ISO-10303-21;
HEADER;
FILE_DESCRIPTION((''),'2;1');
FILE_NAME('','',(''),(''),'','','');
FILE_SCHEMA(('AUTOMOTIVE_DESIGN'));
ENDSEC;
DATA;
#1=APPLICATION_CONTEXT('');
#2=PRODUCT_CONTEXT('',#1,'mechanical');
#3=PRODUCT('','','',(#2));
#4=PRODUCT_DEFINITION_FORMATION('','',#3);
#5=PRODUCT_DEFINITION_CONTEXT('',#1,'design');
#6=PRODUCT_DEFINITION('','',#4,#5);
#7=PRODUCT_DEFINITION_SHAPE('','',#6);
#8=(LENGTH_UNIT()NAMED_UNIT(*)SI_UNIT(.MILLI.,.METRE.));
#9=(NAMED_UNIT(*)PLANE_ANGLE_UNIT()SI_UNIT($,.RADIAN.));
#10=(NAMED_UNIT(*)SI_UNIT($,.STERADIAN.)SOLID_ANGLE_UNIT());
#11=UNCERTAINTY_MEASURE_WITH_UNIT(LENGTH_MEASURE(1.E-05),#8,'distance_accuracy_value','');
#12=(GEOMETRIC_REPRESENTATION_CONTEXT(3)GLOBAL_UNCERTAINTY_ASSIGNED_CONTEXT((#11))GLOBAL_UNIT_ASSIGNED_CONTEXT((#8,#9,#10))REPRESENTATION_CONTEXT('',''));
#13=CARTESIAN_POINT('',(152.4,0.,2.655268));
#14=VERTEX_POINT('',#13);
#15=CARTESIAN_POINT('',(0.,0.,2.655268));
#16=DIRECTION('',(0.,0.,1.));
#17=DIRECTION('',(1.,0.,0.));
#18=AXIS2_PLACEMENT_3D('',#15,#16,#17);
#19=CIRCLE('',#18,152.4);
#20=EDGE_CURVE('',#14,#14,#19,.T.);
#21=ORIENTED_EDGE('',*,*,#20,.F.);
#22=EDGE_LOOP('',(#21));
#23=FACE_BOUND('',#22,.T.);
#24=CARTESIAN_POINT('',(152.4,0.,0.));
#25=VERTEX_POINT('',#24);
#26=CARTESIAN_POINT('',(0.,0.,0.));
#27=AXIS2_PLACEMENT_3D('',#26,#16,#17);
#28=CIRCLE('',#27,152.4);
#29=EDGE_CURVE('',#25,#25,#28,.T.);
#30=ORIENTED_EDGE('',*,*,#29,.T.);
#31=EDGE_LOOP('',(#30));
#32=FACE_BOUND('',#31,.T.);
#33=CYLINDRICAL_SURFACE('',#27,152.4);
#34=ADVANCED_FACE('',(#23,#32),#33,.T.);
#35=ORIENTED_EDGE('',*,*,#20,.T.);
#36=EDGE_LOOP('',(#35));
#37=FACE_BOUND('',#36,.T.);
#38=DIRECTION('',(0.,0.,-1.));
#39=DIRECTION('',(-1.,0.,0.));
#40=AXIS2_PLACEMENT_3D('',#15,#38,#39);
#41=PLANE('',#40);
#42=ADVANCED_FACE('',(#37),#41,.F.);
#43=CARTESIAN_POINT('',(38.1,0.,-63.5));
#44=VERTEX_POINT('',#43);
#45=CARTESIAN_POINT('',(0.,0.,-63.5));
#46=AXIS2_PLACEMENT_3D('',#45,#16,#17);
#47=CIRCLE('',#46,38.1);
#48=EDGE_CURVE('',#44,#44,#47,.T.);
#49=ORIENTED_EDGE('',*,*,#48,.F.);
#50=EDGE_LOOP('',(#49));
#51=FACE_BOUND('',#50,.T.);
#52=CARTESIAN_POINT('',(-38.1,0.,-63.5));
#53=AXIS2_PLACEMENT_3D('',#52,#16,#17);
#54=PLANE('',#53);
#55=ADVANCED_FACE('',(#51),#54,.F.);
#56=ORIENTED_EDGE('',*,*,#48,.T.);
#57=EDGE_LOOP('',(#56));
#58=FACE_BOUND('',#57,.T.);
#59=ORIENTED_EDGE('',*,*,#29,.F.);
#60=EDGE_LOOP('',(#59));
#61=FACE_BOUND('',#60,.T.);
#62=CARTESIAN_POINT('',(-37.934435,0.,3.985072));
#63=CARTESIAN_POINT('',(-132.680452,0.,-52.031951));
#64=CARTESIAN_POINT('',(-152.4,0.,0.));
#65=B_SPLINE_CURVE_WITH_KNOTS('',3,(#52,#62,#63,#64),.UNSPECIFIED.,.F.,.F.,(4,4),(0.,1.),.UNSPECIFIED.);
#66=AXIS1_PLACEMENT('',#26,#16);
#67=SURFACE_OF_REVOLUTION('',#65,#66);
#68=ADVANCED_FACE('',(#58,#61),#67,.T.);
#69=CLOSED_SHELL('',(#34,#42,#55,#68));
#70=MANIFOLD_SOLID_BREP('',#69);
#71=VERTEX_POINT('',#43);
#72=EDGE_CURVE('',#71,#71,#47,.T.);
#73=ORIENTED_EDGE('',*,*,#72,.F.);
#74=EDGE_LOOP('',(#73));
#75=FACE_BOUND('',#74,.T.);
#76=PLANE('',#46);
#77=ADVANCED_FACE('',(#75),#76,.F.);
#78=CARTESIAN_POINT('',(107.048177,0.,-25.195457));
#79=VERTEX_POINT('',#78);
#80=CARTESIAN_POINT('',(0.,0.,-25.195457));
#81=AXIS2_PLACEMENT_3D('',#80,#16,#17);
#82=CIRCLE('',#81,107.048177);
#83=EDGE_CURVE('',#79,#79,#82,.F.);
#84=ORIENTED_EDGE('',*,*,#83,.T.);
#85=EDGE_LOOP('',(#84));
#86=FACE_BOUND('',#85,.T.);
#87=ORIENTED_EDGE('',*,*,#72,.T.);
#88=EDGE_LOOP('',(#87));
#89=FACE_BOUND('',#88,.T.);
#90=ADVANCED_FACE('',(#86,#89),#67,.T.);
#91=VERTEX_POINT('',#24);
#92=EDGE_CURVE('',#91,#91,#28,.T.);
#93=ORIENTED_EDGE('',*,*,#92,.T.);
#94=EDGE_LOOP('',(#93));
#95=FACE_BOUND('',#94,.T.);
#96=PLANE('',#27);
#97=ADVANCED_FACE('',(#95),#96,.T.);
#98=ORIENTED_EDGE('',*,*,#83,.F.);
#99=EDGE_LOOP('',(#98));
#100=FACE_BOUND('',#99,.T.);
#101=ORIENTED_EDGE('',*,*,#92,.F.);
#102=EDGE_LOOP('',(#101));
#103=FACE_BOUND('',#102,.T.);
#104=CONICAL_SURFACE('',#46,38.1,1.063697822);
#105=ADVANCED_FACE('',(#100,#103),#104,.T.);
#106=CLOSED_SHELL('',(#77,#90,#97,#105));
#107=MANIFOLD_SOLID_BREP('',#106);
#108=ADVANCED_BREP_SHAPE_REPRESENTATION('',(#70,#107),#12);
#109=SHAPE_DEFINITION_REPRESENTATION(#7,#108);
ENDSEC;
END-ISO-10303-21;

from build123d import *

# Parameters (mm, degrees)
SKETCH1_R = 152.4
SKETCH2_R = 38.1


# Read off the part's stored shape, not the designer's step: Cut-Revolve2
with BuildPart() as part:
    # Sketch1 → Loft2 section 0
    with BuildSketch(Plane.XY):
        Circle(SKETCH1_R)
    # Sketch2 → Loft2 section 1
    with BuildSketch(Plane.XY.offset(-63.5)):
        Circle(SKETCH2_R)
    loft()

    # Cut-Revolve2 outline → Cut-Revolve2 (revolve, cut)
    with BuildSketch(Plane.XZ):
        with BuildLine():
            add(Edge.make_bspline(
                [(38.1, -63.5), (37.997026849, -21.52773095), (74.60779797, -27.328601895), (107.048176751, -25.195457361)],
                knots=[0, 0, 0, 0, 0.621948939, 0.621948939, 0.621948939, 0.621948939], degree=3))
            Line((38.1, -63.5), (107.048176851, -63.5000001))
            Line((107.048176851, -63.5000001), (107.048176751, -25.195457361))
        make_face()
    revolve(axis=Axis((0, 0, 0), (0, 0, 1)), mode=Mode.SUBTRACT)


with BuildPart() as body_2:
    # Sketch8 → Revolve1 (revolve)
    with BuildSketch(Plane(origin=(0, 0, 0), x_dir=(1, 0, 0), z_dir=(0, 1, 0)), mode=Mode.PRIVATE) as revolve1_sk:
        with BuildLine():
            Line((-38.1, 63.5), (0, 63.5))
            Line((0, 63.5), (0, -2.655267609))
            Line((0, -2.655267609), (-152.4, -2.655267609))
            Line((-152.4, -2.655267609), (-152.4, 0))
            add(Edge.make_bspline(
                [(-152.4, 0), (-132.680452173, 52.031950549), (-37.93443472, -3.985072174), (-38.1, 63.5)],
                knots=[0, 0, 0, 0, 1, 1, 1, 1], degree=3))
        make_face()
    revolve(revolve1_sk.sketch.rotate(Axis((0, 0, 0), (0, 0, -1)), 180), axis=Axis((0, 0, 0), (0, 0, -1)))


solid = Compound([part.part, body_2.part])
